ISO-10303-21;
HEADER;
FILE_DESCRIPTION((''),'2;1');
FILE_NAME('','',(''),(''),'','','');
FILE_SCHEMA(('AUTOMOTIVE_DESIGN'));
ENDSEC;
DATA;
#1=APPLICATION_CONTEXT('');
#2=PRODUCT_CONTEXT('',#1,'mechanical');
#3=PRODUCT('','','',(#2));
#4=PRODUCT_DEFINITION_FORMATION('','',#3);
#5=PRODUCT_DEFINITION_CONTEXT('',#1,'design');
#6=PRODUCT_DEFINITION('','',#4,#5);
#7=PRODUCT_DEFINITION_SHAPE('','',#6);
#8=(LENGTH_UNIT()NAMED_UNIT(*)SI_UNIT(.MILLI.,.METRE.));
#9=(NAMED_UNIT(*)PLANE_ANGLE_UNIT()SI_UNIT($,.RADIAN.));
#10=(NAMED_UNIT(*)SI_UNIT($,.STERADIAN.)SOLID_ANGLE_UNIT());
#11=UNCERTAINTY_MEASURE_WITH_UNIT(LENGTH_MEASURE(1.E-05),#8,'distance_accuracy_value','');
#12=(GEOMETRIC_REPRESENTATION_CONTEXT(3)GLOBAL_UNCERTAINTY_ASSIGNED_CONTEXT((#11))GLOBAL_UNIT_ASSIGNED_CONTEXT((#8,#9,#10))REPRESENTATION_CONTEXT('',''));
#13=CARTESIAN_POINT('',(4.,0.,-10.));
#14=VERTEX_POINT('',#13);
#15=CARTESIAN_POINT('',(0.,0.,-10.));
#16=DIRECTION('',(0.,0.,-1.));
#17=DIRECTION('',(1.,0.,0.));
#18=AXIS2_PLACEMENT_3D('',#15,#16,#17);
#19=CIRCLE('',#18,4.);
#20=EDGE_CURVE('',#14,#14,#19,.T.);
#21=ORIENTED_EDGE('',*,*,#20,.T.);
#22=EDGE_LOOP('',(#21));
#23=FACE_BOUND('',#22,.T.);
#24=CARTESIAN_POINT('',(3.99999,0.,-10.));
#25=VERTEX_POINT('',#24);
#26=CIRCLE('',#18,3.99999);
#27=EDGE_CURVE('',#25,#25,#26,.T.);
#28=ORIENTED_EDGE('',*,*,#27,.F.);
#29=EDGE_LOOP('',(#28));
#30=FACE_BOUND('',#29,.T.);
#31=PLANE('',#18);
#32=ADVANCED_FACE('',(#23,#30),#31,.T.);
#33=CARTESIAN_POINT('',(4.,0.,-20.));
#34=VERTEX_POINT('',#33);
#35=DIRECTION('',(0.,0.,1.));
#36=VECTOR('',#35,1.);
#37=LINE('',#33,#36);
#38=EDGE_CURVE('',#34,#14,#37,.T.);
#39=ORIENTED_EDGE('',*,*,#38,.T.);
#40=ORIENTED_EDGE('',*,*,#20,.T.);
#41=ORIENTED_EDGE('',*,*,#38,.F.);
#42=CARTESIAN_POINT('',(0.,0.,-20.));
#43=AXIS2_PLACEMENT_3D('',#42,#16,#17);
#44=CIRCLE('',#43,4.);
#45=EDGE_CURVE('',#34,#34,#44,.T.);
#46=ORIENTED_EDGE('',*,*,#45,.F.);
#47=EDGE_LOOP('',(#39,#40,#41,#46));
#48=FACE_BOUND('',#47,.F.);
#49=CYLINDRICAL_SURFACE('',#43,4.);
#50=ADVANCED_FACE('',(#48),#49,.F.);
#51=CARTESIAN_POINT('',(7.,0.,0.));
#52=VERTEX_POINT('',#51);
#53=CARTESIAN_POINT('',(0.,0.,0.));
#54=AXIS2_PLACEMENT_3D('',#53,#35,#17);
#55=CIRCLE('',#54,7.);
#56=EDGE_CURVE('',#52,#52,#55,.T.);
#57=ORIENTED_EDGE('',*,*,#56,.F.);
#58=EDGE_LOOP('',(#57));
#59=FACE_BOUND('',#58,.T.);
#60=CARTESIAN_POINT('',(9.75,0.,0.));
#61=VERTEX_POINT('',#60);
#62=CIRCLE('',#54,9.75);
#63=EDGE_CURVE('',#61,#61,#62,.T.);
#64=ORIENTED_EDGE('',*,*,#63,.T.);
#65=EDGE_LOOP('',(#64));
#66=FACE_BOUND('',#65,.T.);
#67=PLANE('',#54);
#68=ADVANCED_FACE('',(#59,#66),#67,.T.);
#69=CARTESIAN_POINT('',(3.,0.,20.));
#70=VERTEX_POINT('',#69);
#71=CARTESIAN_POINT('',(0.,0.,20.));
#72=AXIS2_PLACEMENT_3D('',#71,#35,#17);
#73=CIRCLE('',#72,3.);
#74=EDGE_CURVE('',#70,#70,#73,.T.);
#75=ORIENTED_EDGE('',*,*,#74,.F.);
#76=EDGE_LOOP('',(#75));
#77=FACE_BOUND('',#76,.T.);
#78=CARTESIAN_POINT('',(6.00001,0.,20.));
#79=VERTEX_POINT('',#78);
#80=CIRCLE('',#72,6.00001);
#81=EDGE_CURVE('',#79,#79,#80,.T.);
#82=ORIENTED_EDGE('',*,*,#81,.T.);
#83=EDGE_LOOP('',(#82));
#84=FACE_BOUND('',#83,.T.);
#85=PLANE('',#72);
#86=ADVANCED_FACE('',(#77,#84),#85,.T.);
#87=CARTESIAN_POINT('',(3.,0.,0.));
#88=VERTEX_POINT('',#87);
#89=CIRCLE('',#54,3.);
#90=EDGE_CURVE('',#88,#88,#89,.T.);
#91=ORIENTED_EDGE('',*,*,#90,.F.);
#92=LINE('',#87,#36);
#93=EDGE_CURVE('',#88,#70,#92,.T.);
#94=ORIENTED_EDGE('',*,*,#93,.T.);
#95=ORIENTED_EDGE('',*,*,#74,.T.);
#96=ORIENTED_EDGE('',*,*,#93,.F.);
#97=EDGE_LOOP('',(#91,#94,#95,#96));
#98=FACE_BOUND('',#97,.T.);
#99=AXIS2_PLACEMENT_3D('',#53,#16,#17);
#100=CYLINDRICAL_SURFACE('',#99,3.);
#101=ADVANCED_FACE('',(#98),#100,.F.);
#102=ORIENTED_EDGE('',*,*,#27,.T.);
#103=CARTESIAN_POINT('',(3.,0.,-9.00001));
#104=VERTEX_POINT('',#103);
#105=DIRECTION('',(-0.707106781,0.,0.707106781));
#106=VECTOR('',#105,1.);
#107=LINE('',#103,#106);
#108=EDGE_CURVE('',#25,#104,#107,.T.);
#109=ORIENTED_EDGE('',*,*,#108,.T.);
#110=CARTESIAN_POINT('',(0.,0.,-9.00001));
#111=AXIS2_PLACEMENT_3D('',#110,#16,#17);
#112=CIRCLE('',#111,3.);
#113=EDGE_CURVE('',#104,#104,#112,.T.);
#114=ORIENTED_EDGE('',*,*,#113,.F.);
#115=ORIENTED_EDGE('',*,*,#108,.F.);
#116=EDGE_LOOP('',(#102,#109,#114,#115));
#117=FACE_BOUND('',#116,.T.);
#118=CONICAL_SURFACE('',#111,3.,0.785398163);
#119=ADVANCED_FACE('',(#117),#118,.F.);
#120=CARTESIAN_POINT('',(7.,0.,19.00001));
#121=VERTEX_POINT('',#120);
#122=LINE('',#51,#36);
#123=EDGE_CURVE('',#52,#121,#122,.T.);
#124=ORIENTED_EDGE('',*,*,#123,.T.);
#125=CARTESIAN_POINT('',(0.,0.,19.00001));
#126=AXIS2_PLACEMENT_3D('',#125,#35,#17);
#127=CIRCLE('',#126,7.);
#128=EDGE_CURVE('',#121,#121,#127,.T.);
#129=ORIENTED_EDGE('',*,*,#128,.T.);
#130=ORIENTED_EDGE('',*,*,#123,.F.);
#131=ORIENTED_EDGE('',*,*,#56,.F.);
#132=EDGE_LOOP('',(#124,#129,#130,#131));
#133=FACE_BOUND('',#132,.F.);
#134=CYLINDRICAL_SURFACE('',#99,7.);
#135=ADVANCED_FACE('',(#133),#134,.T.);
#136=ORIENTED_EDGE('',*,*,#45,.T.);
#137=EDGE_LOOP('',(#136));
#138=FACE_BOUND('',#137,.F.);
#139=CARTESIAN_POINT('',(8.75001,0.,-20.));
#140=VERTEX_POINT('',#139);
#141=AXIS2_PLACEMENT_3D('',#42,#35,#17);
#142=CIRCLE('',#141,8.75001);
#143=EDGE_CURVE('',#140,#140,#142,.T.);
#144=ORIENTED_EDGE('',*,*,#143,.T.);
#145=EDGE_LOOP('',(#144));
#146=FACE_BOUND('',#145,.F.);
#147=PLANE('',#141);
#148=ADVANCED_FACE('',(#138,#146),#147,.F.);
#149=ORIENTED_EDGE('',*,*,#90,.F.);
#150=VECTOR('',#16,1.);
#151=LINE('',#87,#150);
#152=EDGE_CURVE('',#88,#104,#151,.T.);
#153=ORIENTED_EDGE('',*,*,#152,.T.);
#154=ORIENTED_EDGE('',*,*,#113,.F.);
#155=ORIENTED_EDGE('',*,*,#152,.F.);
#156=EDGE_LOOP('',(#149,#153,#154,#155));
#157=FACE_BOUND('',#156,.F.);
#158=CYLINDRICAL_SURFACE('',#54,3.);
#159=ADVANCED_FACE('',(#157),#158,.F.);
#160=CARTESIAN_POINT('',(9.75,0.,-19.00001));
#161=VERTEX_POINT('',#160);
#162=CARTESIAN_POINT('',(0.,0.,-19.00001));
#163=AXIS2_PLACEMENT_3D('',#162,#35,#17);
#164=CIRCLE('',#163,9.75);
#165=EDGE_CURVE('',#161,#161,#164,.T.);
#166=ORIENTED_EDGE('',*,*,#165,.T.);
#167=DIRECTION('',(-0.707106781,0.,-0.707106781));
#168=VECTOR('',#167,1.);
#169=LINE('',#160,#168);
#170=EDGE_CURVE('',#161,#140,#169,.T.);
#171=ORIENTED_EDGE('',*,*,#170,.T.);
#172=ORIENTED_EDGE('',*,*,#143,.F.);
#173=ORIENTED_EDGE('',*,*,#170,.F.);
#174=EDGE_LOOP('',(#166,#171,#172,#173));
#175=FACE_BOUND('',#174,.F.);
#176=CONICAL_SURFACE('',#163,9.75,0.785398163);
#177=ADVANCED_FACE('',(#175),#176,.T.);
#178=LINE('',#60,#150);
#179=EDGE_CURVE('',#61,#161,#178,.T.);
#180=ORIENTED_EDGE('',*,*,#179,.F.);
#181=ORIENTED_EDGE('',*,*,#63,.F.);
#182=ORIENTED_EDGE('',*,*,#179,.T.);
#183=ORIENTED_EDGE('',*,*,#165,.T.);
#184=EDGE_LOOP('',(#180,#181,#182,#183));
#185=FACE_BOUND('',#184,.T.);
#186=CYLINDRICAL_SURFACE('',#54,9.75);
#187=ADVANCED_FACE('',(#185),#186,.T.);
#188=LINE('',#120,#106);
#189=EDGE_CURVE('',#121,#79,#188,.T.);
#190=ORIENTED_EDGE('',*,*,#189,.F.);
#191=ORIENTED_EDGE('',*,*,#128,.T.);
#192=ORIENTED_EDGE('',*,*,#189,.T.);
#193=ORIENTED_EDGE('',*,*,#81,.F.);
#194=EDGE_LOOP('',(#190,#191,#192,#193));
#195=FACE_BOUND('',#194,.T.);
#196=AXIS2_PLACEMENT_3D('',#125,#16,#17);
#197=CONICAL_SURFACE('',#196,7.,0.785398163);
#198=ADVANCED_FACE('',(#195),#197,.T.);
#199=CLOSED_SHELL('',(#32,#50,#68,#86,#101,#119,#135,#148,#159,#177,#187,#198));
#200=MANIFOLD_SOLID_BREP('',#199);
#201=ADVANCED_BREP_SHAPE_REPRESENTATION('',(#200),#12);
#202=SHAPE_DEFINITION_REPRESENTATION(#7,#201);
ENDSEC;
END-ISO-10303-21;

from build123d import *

# Parameters (mm, degrees)
F0_R     = 7
F0_R_2   = 3
F1_DEPTH = 20
F0_R_3   = 9.75
F2_DEPTH = 20
F3_R     = 4
F3_R_2   = 3
F4_DEPTH = 10
F5_SIZE  = 0.99999


# Not quite as in the source:
# - a fillet or chamfer is up to 0.001 mm smaller than in the source, because OpenCascade refuses the exact size


with BuildPart() as f1:
    # F0 (on Top) → F1 (new body)
    with BuildSketch(Plane.XY):
        Circle(F0_R)
        Circle(F0_R_2, mode=Mode.SUBTRACT)
    extrude(amount=F1_DEPTH)

    # F0 (on Top) → F2 (join)
    with BuildSketch(Plane.XY):
        Circle(F0_R_3)
        Circle(F0_R, mode=Mode.SUBTRACT)
        Circle(F0_R)
        Circle(F0_R_2, mode=Mode.SUBTRACT)
    extrude(amount=-F2_DEPTH)

    # F3 (on face) → F4 (cut)
    with BuildSketch(Plane(origin=(0, 0, -20), x_dir=(1, 0, 0), z_dir=(0, 0, -1))):
        Circle(F3_R)
        Circle(F3_R_2, mode=Mode.SUBTRACT)
    extrude(amount=-F4_DEPTH, mode=Mode.SUBTRACT)

    # F5 (size 1 in the source; OpenCascade refuses exactly that, so slightly less here)
    f5_edges = [f1.edges().sort_by_distance(p)[0] for p in [
        (-9.75, 0, -20),
        (-7, 0, 20),
        (-3, 0, -10),
    ]]
    chamfer(f5_edges, length=F5_SIZE)


solid = f1.part
